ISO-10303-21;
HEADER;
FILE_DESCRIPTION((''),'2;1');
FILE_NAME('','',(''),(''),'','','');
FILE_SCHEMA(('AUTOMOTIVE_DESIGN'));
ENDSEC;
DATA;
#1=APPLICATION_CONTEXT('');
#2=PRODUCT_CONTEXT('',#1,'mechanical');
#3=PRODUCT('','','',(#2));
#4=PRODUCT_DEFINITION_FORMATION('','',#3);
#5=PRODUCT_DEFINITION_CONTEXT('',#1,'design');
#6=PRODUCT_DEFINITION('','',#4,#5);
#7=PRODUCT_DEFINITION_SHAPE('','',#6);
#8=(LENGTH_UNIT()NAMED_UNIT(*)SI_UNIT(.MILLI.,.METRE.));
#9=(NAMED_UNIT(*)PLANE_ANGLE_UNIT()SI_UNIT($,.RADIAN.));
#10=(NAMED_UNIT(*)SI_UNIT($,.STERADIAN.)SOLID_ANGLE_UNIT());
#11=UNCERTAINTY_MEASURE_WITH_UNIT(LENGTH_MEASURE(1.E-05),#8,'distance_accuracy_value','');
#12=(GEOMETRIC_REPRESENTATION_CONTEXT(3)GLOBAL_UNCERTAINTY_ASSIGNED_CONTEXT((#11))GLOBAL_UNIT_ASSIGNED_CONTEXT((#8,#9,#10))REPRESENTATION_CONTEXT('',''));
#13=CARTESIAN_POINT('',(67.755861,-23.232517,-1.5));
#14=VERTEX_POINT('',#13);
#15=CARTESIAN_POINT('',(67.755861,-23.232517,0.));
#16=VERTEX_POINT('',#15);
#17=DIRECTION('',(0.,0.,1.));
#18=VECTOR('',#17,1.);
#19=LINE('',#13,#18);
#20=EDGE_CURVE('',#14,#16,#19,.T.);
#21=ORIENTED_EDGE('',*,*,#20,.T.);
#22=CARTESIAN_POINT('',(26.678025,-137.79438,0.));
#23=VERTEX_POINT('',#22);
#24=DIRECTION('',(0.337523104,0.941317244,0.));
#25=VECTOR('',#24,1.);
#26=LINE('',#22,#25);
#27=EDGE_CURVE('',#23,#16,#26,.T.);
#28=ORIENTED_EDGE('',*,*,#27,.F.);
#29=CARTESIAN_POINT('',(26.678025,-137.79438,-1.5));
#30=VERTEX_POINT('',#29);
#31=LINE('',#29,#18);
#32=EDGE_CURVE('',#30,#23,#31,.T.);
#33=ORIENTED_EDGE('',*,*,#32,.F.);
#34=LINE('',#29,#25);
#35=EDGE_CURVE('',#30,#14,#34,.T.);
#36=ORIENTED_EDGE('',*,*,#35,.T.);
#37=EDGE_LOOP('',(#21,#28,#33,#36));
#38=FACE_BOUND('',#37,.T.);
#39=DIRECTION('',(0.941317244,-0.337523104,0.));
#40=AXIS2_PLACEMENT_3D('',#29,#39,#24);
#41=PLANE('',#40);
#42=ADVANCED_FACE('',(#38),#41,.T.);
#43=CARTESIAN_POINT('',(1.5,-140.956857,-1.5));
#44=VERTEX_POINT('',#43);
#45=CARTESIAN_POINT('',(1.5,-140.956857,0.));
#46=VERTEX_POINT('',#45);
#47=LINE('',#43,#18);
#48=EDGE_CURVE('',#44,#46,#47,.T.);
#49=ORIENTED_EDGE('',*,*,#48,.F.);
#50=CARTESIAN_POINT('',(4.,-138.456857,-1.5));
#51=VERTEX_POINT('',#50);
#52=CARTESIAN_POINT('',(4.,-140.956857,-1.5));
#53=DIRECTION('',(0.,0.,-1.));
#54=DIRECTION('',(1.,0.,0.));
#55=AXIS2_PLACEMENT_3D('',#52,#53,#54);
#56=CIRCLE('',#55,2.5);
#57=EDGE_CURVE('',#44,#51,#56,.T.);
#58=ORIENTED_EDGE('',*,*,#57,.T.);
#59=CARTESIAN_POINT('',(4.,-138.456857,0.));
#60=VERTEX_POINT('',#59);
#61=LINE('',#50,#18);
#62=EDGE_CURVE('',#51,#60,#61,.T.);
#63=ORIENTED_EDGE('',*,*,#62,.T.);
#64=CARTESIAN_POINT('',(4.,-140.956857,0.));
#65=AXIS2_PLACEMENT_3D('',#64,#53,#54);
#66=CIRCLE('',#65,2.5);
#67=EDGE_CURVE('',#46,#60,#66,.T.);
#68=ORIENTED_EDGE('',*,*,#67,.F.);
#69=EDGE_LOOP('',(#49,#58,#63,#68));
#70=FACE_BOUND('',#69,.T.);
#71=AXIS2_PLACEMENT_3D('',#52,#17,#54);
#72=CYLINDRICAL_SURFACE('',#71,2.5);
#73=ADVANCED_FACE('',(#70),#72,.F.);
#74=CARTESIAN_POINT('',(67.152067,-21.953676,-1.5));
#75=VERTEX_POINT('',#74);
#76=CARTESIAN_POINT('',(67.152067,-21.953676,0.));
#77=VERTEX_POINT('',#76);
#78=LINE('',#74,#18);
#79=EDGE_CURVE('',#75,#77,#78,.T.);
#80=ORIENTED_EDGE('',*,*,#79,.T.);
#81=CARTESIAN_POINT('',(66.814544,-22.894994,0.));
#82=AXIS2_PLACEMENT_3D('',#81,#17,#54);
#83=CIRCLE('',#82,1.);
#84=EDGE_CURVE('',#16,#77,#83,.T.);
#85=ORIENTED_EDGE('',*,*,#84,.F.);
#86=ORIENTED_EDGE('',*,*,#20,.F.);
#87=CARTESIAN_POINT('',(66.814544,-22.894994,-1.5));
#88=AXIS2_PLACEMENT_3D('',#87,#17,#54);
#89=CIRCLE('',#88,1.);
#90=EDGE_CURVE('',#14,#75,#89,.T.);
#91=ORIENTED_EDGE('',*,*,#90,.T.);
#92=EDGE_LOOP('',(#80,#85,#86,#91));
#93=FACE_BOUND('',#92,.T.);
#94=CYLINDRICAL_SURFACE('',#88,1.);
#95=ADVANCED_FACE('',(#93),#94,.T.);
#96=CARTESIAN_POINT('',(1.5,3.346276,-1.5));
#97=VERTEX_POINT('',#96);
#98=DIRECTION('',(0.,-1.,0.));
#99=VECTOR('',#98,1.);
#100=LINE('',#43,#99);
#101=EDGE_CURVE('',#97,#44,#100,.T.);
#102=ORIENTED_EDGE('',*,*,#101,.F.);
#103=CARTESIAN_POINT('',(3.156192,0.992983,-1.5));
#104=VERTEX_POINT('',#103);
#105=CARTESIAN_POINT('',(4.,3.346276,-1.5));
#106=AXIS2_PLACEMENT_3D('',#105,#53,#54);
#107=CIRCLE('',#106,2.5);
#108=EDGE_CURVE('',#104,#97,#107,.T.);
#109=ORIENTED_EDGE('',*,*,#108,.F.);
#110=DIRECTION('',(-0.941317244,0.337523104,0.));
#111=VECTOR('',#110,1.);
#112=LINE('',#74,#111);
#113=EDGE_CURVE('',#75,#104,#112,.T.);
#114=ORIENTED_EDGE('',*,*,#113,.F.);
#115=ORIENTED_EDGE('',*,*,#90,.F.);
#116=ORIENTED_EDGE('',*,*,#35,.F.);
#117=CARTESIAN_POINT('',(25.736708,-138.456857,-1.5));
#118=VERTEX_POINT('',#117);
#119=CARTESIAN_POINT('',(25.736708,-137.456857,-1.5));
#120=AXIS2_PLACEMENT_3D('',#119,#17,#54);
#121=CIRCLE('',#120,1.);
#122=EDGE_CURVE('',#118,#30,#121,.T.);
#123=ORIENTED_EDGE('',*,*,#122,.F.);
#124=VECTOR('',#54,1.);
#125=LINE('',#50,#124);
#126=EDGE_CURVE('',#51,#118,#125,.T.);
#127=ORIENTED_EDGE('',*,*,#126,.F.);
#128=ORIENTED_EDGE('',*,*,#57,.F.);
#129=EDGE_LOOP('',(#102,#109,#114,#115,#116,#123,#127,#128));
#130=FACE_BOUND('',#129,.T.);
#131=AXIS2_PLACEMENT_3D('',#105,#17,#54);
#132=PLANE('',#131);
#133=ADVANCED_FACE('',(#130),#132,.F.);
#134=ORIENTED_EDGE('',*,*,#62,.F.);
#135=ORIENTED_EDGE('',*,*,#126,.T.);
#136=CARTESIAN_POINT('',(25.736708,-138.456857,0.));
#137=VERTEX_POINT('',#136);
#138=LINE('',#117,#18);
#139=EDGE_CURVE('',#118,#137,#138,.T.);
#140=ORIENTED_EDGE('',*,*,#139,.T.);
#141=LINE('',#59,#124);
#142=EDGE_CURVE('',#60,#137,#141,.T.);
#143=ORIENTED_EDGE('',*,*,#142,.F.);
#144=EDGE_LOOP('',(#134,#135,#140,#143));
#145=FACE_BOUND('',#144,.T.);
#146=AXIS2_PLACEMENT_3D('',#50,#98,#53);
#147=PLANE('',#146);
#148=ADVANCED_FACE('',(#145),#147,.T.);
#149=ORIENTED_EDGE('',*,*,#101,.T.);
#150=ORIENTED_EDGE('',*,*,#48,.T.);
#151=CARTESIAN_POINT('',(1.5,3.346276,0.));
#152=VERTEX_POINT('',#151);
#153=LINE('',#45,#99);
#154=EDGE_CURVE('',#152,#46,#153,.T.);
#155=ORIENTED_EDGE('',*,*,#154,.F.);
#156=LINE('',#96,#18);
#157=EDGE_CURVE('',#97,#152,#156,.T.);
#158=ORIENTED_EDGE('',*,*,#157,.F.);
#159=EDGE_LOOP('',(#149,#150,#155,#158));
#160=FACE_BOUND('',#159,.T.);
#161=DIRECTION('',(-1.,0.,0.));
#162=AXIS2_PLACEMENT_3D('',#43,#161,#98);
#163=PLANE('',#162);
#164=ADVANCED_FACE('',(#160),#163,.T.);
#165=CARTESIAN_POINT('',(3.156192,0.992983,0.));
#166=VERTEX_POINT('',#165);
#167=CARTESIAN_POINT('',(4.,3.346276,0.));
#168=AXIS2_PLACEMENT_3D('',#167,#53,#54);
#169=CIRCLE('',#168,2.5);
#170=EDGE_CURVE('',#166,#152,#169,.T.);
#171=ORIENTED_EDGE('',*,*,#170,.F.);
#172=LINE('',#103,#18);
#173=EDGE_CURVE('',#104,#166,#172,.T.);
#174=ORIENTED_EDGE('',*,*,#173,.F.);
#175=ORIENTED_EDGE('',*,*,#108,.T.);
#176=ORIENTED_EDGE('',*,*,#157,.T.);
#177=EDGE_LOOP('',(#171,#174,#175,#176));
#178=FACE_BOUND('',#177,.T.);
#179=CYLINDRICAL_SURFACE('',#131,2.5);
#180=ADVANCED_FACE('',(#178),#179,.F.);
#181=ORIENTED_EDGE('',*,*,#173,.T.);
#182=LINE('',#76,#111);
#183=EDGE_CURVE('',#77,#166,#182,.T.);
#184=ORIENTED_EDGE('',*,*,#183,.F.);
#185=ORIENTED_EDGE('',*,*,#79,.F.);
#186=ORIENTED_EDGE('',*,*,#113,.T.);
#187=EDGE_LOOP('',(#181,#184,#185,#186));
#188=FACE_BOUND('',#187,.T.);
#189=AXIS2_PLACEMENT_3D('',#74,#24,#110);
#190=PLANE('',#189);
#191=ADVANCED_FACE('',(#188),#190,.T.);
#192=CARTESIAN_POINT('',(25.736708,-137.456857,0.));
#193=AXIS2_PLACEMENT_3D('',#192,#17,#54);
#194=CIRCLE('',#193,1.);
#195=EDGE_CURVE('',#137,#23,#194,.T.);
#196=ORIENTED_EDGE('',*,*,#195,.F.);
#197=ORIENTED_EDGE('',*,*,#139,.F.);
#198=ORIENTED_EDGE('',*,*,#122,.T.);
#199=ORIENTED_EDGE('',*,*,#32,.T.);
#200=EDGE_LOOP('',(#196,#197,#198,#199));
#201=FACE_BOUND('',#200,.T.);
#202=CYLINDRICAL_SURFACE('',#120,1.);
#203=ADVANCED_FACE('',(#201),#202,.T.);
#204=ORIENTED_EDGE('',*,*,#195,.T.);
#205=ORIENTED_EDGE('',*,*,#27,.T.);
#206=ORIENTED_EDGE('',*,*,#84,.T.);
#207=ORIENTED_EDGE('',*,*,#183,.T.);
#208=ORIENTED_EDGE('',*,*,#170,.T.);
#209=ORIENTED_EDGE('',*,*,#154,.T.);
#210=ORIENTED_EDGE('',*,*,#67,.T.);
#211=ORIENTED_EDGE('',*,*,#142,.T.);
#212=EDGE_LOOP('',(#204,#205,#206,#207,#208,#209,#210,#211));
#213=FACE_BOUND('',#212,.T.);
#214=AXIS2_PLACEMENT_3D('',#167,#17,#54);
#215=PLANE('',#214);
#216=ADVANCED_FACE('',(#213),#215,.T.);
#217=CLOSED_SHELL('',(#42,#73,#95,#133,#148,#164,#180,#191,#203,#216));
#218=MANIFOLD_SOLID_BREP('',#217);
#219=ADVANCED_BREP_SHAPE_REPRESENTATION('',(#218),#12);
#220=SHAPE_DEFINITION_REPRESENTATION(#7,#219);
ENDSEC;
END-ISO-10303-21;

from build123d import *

# Parameters (mm, degrees)
SM_BASE_FLANGE_1_DEPTH = 1.5


# Sheet-metal steps are written as plain solids
with BuildPart() as part:
    # Sketch 1 → Базовая кромка1 (new body)
    with BuildSketch(Plane.XY):
        with BuildLine():
            Line((4, -138.456857017), (25.736707543, -138.456857017))
            ThreePointArc((25.736707543, -138.456857017), (26.312240729, -138.274635442), (26.678024787, -137.794380121))
            Line((26.678024787, -137.794380121), (67.755861168, -23.23251667))
            ThreePointArc((67.755861168, -23.23251667), (67.718820606, -22.468046636), (67.152067027, -21.953676322))
            Line((67.152067027, -21.953676322), (3.15619224, 0.992983188))
            ThreePointArc((3.15619224, 0.992983188), (1.955553938, 1.907443334), (1.5, 3.346276299))
            Line((1.5, 3.346276299), (1.5, -140.956857017))
            ThreePointArc((1.5, -140.956857017), (2.232233047, -139.189090064), (4, -138.456857017))
        make_face()
    extrude(amount=-SM_BASE_FLANGE_1_DEPTH)


solid = part.part
